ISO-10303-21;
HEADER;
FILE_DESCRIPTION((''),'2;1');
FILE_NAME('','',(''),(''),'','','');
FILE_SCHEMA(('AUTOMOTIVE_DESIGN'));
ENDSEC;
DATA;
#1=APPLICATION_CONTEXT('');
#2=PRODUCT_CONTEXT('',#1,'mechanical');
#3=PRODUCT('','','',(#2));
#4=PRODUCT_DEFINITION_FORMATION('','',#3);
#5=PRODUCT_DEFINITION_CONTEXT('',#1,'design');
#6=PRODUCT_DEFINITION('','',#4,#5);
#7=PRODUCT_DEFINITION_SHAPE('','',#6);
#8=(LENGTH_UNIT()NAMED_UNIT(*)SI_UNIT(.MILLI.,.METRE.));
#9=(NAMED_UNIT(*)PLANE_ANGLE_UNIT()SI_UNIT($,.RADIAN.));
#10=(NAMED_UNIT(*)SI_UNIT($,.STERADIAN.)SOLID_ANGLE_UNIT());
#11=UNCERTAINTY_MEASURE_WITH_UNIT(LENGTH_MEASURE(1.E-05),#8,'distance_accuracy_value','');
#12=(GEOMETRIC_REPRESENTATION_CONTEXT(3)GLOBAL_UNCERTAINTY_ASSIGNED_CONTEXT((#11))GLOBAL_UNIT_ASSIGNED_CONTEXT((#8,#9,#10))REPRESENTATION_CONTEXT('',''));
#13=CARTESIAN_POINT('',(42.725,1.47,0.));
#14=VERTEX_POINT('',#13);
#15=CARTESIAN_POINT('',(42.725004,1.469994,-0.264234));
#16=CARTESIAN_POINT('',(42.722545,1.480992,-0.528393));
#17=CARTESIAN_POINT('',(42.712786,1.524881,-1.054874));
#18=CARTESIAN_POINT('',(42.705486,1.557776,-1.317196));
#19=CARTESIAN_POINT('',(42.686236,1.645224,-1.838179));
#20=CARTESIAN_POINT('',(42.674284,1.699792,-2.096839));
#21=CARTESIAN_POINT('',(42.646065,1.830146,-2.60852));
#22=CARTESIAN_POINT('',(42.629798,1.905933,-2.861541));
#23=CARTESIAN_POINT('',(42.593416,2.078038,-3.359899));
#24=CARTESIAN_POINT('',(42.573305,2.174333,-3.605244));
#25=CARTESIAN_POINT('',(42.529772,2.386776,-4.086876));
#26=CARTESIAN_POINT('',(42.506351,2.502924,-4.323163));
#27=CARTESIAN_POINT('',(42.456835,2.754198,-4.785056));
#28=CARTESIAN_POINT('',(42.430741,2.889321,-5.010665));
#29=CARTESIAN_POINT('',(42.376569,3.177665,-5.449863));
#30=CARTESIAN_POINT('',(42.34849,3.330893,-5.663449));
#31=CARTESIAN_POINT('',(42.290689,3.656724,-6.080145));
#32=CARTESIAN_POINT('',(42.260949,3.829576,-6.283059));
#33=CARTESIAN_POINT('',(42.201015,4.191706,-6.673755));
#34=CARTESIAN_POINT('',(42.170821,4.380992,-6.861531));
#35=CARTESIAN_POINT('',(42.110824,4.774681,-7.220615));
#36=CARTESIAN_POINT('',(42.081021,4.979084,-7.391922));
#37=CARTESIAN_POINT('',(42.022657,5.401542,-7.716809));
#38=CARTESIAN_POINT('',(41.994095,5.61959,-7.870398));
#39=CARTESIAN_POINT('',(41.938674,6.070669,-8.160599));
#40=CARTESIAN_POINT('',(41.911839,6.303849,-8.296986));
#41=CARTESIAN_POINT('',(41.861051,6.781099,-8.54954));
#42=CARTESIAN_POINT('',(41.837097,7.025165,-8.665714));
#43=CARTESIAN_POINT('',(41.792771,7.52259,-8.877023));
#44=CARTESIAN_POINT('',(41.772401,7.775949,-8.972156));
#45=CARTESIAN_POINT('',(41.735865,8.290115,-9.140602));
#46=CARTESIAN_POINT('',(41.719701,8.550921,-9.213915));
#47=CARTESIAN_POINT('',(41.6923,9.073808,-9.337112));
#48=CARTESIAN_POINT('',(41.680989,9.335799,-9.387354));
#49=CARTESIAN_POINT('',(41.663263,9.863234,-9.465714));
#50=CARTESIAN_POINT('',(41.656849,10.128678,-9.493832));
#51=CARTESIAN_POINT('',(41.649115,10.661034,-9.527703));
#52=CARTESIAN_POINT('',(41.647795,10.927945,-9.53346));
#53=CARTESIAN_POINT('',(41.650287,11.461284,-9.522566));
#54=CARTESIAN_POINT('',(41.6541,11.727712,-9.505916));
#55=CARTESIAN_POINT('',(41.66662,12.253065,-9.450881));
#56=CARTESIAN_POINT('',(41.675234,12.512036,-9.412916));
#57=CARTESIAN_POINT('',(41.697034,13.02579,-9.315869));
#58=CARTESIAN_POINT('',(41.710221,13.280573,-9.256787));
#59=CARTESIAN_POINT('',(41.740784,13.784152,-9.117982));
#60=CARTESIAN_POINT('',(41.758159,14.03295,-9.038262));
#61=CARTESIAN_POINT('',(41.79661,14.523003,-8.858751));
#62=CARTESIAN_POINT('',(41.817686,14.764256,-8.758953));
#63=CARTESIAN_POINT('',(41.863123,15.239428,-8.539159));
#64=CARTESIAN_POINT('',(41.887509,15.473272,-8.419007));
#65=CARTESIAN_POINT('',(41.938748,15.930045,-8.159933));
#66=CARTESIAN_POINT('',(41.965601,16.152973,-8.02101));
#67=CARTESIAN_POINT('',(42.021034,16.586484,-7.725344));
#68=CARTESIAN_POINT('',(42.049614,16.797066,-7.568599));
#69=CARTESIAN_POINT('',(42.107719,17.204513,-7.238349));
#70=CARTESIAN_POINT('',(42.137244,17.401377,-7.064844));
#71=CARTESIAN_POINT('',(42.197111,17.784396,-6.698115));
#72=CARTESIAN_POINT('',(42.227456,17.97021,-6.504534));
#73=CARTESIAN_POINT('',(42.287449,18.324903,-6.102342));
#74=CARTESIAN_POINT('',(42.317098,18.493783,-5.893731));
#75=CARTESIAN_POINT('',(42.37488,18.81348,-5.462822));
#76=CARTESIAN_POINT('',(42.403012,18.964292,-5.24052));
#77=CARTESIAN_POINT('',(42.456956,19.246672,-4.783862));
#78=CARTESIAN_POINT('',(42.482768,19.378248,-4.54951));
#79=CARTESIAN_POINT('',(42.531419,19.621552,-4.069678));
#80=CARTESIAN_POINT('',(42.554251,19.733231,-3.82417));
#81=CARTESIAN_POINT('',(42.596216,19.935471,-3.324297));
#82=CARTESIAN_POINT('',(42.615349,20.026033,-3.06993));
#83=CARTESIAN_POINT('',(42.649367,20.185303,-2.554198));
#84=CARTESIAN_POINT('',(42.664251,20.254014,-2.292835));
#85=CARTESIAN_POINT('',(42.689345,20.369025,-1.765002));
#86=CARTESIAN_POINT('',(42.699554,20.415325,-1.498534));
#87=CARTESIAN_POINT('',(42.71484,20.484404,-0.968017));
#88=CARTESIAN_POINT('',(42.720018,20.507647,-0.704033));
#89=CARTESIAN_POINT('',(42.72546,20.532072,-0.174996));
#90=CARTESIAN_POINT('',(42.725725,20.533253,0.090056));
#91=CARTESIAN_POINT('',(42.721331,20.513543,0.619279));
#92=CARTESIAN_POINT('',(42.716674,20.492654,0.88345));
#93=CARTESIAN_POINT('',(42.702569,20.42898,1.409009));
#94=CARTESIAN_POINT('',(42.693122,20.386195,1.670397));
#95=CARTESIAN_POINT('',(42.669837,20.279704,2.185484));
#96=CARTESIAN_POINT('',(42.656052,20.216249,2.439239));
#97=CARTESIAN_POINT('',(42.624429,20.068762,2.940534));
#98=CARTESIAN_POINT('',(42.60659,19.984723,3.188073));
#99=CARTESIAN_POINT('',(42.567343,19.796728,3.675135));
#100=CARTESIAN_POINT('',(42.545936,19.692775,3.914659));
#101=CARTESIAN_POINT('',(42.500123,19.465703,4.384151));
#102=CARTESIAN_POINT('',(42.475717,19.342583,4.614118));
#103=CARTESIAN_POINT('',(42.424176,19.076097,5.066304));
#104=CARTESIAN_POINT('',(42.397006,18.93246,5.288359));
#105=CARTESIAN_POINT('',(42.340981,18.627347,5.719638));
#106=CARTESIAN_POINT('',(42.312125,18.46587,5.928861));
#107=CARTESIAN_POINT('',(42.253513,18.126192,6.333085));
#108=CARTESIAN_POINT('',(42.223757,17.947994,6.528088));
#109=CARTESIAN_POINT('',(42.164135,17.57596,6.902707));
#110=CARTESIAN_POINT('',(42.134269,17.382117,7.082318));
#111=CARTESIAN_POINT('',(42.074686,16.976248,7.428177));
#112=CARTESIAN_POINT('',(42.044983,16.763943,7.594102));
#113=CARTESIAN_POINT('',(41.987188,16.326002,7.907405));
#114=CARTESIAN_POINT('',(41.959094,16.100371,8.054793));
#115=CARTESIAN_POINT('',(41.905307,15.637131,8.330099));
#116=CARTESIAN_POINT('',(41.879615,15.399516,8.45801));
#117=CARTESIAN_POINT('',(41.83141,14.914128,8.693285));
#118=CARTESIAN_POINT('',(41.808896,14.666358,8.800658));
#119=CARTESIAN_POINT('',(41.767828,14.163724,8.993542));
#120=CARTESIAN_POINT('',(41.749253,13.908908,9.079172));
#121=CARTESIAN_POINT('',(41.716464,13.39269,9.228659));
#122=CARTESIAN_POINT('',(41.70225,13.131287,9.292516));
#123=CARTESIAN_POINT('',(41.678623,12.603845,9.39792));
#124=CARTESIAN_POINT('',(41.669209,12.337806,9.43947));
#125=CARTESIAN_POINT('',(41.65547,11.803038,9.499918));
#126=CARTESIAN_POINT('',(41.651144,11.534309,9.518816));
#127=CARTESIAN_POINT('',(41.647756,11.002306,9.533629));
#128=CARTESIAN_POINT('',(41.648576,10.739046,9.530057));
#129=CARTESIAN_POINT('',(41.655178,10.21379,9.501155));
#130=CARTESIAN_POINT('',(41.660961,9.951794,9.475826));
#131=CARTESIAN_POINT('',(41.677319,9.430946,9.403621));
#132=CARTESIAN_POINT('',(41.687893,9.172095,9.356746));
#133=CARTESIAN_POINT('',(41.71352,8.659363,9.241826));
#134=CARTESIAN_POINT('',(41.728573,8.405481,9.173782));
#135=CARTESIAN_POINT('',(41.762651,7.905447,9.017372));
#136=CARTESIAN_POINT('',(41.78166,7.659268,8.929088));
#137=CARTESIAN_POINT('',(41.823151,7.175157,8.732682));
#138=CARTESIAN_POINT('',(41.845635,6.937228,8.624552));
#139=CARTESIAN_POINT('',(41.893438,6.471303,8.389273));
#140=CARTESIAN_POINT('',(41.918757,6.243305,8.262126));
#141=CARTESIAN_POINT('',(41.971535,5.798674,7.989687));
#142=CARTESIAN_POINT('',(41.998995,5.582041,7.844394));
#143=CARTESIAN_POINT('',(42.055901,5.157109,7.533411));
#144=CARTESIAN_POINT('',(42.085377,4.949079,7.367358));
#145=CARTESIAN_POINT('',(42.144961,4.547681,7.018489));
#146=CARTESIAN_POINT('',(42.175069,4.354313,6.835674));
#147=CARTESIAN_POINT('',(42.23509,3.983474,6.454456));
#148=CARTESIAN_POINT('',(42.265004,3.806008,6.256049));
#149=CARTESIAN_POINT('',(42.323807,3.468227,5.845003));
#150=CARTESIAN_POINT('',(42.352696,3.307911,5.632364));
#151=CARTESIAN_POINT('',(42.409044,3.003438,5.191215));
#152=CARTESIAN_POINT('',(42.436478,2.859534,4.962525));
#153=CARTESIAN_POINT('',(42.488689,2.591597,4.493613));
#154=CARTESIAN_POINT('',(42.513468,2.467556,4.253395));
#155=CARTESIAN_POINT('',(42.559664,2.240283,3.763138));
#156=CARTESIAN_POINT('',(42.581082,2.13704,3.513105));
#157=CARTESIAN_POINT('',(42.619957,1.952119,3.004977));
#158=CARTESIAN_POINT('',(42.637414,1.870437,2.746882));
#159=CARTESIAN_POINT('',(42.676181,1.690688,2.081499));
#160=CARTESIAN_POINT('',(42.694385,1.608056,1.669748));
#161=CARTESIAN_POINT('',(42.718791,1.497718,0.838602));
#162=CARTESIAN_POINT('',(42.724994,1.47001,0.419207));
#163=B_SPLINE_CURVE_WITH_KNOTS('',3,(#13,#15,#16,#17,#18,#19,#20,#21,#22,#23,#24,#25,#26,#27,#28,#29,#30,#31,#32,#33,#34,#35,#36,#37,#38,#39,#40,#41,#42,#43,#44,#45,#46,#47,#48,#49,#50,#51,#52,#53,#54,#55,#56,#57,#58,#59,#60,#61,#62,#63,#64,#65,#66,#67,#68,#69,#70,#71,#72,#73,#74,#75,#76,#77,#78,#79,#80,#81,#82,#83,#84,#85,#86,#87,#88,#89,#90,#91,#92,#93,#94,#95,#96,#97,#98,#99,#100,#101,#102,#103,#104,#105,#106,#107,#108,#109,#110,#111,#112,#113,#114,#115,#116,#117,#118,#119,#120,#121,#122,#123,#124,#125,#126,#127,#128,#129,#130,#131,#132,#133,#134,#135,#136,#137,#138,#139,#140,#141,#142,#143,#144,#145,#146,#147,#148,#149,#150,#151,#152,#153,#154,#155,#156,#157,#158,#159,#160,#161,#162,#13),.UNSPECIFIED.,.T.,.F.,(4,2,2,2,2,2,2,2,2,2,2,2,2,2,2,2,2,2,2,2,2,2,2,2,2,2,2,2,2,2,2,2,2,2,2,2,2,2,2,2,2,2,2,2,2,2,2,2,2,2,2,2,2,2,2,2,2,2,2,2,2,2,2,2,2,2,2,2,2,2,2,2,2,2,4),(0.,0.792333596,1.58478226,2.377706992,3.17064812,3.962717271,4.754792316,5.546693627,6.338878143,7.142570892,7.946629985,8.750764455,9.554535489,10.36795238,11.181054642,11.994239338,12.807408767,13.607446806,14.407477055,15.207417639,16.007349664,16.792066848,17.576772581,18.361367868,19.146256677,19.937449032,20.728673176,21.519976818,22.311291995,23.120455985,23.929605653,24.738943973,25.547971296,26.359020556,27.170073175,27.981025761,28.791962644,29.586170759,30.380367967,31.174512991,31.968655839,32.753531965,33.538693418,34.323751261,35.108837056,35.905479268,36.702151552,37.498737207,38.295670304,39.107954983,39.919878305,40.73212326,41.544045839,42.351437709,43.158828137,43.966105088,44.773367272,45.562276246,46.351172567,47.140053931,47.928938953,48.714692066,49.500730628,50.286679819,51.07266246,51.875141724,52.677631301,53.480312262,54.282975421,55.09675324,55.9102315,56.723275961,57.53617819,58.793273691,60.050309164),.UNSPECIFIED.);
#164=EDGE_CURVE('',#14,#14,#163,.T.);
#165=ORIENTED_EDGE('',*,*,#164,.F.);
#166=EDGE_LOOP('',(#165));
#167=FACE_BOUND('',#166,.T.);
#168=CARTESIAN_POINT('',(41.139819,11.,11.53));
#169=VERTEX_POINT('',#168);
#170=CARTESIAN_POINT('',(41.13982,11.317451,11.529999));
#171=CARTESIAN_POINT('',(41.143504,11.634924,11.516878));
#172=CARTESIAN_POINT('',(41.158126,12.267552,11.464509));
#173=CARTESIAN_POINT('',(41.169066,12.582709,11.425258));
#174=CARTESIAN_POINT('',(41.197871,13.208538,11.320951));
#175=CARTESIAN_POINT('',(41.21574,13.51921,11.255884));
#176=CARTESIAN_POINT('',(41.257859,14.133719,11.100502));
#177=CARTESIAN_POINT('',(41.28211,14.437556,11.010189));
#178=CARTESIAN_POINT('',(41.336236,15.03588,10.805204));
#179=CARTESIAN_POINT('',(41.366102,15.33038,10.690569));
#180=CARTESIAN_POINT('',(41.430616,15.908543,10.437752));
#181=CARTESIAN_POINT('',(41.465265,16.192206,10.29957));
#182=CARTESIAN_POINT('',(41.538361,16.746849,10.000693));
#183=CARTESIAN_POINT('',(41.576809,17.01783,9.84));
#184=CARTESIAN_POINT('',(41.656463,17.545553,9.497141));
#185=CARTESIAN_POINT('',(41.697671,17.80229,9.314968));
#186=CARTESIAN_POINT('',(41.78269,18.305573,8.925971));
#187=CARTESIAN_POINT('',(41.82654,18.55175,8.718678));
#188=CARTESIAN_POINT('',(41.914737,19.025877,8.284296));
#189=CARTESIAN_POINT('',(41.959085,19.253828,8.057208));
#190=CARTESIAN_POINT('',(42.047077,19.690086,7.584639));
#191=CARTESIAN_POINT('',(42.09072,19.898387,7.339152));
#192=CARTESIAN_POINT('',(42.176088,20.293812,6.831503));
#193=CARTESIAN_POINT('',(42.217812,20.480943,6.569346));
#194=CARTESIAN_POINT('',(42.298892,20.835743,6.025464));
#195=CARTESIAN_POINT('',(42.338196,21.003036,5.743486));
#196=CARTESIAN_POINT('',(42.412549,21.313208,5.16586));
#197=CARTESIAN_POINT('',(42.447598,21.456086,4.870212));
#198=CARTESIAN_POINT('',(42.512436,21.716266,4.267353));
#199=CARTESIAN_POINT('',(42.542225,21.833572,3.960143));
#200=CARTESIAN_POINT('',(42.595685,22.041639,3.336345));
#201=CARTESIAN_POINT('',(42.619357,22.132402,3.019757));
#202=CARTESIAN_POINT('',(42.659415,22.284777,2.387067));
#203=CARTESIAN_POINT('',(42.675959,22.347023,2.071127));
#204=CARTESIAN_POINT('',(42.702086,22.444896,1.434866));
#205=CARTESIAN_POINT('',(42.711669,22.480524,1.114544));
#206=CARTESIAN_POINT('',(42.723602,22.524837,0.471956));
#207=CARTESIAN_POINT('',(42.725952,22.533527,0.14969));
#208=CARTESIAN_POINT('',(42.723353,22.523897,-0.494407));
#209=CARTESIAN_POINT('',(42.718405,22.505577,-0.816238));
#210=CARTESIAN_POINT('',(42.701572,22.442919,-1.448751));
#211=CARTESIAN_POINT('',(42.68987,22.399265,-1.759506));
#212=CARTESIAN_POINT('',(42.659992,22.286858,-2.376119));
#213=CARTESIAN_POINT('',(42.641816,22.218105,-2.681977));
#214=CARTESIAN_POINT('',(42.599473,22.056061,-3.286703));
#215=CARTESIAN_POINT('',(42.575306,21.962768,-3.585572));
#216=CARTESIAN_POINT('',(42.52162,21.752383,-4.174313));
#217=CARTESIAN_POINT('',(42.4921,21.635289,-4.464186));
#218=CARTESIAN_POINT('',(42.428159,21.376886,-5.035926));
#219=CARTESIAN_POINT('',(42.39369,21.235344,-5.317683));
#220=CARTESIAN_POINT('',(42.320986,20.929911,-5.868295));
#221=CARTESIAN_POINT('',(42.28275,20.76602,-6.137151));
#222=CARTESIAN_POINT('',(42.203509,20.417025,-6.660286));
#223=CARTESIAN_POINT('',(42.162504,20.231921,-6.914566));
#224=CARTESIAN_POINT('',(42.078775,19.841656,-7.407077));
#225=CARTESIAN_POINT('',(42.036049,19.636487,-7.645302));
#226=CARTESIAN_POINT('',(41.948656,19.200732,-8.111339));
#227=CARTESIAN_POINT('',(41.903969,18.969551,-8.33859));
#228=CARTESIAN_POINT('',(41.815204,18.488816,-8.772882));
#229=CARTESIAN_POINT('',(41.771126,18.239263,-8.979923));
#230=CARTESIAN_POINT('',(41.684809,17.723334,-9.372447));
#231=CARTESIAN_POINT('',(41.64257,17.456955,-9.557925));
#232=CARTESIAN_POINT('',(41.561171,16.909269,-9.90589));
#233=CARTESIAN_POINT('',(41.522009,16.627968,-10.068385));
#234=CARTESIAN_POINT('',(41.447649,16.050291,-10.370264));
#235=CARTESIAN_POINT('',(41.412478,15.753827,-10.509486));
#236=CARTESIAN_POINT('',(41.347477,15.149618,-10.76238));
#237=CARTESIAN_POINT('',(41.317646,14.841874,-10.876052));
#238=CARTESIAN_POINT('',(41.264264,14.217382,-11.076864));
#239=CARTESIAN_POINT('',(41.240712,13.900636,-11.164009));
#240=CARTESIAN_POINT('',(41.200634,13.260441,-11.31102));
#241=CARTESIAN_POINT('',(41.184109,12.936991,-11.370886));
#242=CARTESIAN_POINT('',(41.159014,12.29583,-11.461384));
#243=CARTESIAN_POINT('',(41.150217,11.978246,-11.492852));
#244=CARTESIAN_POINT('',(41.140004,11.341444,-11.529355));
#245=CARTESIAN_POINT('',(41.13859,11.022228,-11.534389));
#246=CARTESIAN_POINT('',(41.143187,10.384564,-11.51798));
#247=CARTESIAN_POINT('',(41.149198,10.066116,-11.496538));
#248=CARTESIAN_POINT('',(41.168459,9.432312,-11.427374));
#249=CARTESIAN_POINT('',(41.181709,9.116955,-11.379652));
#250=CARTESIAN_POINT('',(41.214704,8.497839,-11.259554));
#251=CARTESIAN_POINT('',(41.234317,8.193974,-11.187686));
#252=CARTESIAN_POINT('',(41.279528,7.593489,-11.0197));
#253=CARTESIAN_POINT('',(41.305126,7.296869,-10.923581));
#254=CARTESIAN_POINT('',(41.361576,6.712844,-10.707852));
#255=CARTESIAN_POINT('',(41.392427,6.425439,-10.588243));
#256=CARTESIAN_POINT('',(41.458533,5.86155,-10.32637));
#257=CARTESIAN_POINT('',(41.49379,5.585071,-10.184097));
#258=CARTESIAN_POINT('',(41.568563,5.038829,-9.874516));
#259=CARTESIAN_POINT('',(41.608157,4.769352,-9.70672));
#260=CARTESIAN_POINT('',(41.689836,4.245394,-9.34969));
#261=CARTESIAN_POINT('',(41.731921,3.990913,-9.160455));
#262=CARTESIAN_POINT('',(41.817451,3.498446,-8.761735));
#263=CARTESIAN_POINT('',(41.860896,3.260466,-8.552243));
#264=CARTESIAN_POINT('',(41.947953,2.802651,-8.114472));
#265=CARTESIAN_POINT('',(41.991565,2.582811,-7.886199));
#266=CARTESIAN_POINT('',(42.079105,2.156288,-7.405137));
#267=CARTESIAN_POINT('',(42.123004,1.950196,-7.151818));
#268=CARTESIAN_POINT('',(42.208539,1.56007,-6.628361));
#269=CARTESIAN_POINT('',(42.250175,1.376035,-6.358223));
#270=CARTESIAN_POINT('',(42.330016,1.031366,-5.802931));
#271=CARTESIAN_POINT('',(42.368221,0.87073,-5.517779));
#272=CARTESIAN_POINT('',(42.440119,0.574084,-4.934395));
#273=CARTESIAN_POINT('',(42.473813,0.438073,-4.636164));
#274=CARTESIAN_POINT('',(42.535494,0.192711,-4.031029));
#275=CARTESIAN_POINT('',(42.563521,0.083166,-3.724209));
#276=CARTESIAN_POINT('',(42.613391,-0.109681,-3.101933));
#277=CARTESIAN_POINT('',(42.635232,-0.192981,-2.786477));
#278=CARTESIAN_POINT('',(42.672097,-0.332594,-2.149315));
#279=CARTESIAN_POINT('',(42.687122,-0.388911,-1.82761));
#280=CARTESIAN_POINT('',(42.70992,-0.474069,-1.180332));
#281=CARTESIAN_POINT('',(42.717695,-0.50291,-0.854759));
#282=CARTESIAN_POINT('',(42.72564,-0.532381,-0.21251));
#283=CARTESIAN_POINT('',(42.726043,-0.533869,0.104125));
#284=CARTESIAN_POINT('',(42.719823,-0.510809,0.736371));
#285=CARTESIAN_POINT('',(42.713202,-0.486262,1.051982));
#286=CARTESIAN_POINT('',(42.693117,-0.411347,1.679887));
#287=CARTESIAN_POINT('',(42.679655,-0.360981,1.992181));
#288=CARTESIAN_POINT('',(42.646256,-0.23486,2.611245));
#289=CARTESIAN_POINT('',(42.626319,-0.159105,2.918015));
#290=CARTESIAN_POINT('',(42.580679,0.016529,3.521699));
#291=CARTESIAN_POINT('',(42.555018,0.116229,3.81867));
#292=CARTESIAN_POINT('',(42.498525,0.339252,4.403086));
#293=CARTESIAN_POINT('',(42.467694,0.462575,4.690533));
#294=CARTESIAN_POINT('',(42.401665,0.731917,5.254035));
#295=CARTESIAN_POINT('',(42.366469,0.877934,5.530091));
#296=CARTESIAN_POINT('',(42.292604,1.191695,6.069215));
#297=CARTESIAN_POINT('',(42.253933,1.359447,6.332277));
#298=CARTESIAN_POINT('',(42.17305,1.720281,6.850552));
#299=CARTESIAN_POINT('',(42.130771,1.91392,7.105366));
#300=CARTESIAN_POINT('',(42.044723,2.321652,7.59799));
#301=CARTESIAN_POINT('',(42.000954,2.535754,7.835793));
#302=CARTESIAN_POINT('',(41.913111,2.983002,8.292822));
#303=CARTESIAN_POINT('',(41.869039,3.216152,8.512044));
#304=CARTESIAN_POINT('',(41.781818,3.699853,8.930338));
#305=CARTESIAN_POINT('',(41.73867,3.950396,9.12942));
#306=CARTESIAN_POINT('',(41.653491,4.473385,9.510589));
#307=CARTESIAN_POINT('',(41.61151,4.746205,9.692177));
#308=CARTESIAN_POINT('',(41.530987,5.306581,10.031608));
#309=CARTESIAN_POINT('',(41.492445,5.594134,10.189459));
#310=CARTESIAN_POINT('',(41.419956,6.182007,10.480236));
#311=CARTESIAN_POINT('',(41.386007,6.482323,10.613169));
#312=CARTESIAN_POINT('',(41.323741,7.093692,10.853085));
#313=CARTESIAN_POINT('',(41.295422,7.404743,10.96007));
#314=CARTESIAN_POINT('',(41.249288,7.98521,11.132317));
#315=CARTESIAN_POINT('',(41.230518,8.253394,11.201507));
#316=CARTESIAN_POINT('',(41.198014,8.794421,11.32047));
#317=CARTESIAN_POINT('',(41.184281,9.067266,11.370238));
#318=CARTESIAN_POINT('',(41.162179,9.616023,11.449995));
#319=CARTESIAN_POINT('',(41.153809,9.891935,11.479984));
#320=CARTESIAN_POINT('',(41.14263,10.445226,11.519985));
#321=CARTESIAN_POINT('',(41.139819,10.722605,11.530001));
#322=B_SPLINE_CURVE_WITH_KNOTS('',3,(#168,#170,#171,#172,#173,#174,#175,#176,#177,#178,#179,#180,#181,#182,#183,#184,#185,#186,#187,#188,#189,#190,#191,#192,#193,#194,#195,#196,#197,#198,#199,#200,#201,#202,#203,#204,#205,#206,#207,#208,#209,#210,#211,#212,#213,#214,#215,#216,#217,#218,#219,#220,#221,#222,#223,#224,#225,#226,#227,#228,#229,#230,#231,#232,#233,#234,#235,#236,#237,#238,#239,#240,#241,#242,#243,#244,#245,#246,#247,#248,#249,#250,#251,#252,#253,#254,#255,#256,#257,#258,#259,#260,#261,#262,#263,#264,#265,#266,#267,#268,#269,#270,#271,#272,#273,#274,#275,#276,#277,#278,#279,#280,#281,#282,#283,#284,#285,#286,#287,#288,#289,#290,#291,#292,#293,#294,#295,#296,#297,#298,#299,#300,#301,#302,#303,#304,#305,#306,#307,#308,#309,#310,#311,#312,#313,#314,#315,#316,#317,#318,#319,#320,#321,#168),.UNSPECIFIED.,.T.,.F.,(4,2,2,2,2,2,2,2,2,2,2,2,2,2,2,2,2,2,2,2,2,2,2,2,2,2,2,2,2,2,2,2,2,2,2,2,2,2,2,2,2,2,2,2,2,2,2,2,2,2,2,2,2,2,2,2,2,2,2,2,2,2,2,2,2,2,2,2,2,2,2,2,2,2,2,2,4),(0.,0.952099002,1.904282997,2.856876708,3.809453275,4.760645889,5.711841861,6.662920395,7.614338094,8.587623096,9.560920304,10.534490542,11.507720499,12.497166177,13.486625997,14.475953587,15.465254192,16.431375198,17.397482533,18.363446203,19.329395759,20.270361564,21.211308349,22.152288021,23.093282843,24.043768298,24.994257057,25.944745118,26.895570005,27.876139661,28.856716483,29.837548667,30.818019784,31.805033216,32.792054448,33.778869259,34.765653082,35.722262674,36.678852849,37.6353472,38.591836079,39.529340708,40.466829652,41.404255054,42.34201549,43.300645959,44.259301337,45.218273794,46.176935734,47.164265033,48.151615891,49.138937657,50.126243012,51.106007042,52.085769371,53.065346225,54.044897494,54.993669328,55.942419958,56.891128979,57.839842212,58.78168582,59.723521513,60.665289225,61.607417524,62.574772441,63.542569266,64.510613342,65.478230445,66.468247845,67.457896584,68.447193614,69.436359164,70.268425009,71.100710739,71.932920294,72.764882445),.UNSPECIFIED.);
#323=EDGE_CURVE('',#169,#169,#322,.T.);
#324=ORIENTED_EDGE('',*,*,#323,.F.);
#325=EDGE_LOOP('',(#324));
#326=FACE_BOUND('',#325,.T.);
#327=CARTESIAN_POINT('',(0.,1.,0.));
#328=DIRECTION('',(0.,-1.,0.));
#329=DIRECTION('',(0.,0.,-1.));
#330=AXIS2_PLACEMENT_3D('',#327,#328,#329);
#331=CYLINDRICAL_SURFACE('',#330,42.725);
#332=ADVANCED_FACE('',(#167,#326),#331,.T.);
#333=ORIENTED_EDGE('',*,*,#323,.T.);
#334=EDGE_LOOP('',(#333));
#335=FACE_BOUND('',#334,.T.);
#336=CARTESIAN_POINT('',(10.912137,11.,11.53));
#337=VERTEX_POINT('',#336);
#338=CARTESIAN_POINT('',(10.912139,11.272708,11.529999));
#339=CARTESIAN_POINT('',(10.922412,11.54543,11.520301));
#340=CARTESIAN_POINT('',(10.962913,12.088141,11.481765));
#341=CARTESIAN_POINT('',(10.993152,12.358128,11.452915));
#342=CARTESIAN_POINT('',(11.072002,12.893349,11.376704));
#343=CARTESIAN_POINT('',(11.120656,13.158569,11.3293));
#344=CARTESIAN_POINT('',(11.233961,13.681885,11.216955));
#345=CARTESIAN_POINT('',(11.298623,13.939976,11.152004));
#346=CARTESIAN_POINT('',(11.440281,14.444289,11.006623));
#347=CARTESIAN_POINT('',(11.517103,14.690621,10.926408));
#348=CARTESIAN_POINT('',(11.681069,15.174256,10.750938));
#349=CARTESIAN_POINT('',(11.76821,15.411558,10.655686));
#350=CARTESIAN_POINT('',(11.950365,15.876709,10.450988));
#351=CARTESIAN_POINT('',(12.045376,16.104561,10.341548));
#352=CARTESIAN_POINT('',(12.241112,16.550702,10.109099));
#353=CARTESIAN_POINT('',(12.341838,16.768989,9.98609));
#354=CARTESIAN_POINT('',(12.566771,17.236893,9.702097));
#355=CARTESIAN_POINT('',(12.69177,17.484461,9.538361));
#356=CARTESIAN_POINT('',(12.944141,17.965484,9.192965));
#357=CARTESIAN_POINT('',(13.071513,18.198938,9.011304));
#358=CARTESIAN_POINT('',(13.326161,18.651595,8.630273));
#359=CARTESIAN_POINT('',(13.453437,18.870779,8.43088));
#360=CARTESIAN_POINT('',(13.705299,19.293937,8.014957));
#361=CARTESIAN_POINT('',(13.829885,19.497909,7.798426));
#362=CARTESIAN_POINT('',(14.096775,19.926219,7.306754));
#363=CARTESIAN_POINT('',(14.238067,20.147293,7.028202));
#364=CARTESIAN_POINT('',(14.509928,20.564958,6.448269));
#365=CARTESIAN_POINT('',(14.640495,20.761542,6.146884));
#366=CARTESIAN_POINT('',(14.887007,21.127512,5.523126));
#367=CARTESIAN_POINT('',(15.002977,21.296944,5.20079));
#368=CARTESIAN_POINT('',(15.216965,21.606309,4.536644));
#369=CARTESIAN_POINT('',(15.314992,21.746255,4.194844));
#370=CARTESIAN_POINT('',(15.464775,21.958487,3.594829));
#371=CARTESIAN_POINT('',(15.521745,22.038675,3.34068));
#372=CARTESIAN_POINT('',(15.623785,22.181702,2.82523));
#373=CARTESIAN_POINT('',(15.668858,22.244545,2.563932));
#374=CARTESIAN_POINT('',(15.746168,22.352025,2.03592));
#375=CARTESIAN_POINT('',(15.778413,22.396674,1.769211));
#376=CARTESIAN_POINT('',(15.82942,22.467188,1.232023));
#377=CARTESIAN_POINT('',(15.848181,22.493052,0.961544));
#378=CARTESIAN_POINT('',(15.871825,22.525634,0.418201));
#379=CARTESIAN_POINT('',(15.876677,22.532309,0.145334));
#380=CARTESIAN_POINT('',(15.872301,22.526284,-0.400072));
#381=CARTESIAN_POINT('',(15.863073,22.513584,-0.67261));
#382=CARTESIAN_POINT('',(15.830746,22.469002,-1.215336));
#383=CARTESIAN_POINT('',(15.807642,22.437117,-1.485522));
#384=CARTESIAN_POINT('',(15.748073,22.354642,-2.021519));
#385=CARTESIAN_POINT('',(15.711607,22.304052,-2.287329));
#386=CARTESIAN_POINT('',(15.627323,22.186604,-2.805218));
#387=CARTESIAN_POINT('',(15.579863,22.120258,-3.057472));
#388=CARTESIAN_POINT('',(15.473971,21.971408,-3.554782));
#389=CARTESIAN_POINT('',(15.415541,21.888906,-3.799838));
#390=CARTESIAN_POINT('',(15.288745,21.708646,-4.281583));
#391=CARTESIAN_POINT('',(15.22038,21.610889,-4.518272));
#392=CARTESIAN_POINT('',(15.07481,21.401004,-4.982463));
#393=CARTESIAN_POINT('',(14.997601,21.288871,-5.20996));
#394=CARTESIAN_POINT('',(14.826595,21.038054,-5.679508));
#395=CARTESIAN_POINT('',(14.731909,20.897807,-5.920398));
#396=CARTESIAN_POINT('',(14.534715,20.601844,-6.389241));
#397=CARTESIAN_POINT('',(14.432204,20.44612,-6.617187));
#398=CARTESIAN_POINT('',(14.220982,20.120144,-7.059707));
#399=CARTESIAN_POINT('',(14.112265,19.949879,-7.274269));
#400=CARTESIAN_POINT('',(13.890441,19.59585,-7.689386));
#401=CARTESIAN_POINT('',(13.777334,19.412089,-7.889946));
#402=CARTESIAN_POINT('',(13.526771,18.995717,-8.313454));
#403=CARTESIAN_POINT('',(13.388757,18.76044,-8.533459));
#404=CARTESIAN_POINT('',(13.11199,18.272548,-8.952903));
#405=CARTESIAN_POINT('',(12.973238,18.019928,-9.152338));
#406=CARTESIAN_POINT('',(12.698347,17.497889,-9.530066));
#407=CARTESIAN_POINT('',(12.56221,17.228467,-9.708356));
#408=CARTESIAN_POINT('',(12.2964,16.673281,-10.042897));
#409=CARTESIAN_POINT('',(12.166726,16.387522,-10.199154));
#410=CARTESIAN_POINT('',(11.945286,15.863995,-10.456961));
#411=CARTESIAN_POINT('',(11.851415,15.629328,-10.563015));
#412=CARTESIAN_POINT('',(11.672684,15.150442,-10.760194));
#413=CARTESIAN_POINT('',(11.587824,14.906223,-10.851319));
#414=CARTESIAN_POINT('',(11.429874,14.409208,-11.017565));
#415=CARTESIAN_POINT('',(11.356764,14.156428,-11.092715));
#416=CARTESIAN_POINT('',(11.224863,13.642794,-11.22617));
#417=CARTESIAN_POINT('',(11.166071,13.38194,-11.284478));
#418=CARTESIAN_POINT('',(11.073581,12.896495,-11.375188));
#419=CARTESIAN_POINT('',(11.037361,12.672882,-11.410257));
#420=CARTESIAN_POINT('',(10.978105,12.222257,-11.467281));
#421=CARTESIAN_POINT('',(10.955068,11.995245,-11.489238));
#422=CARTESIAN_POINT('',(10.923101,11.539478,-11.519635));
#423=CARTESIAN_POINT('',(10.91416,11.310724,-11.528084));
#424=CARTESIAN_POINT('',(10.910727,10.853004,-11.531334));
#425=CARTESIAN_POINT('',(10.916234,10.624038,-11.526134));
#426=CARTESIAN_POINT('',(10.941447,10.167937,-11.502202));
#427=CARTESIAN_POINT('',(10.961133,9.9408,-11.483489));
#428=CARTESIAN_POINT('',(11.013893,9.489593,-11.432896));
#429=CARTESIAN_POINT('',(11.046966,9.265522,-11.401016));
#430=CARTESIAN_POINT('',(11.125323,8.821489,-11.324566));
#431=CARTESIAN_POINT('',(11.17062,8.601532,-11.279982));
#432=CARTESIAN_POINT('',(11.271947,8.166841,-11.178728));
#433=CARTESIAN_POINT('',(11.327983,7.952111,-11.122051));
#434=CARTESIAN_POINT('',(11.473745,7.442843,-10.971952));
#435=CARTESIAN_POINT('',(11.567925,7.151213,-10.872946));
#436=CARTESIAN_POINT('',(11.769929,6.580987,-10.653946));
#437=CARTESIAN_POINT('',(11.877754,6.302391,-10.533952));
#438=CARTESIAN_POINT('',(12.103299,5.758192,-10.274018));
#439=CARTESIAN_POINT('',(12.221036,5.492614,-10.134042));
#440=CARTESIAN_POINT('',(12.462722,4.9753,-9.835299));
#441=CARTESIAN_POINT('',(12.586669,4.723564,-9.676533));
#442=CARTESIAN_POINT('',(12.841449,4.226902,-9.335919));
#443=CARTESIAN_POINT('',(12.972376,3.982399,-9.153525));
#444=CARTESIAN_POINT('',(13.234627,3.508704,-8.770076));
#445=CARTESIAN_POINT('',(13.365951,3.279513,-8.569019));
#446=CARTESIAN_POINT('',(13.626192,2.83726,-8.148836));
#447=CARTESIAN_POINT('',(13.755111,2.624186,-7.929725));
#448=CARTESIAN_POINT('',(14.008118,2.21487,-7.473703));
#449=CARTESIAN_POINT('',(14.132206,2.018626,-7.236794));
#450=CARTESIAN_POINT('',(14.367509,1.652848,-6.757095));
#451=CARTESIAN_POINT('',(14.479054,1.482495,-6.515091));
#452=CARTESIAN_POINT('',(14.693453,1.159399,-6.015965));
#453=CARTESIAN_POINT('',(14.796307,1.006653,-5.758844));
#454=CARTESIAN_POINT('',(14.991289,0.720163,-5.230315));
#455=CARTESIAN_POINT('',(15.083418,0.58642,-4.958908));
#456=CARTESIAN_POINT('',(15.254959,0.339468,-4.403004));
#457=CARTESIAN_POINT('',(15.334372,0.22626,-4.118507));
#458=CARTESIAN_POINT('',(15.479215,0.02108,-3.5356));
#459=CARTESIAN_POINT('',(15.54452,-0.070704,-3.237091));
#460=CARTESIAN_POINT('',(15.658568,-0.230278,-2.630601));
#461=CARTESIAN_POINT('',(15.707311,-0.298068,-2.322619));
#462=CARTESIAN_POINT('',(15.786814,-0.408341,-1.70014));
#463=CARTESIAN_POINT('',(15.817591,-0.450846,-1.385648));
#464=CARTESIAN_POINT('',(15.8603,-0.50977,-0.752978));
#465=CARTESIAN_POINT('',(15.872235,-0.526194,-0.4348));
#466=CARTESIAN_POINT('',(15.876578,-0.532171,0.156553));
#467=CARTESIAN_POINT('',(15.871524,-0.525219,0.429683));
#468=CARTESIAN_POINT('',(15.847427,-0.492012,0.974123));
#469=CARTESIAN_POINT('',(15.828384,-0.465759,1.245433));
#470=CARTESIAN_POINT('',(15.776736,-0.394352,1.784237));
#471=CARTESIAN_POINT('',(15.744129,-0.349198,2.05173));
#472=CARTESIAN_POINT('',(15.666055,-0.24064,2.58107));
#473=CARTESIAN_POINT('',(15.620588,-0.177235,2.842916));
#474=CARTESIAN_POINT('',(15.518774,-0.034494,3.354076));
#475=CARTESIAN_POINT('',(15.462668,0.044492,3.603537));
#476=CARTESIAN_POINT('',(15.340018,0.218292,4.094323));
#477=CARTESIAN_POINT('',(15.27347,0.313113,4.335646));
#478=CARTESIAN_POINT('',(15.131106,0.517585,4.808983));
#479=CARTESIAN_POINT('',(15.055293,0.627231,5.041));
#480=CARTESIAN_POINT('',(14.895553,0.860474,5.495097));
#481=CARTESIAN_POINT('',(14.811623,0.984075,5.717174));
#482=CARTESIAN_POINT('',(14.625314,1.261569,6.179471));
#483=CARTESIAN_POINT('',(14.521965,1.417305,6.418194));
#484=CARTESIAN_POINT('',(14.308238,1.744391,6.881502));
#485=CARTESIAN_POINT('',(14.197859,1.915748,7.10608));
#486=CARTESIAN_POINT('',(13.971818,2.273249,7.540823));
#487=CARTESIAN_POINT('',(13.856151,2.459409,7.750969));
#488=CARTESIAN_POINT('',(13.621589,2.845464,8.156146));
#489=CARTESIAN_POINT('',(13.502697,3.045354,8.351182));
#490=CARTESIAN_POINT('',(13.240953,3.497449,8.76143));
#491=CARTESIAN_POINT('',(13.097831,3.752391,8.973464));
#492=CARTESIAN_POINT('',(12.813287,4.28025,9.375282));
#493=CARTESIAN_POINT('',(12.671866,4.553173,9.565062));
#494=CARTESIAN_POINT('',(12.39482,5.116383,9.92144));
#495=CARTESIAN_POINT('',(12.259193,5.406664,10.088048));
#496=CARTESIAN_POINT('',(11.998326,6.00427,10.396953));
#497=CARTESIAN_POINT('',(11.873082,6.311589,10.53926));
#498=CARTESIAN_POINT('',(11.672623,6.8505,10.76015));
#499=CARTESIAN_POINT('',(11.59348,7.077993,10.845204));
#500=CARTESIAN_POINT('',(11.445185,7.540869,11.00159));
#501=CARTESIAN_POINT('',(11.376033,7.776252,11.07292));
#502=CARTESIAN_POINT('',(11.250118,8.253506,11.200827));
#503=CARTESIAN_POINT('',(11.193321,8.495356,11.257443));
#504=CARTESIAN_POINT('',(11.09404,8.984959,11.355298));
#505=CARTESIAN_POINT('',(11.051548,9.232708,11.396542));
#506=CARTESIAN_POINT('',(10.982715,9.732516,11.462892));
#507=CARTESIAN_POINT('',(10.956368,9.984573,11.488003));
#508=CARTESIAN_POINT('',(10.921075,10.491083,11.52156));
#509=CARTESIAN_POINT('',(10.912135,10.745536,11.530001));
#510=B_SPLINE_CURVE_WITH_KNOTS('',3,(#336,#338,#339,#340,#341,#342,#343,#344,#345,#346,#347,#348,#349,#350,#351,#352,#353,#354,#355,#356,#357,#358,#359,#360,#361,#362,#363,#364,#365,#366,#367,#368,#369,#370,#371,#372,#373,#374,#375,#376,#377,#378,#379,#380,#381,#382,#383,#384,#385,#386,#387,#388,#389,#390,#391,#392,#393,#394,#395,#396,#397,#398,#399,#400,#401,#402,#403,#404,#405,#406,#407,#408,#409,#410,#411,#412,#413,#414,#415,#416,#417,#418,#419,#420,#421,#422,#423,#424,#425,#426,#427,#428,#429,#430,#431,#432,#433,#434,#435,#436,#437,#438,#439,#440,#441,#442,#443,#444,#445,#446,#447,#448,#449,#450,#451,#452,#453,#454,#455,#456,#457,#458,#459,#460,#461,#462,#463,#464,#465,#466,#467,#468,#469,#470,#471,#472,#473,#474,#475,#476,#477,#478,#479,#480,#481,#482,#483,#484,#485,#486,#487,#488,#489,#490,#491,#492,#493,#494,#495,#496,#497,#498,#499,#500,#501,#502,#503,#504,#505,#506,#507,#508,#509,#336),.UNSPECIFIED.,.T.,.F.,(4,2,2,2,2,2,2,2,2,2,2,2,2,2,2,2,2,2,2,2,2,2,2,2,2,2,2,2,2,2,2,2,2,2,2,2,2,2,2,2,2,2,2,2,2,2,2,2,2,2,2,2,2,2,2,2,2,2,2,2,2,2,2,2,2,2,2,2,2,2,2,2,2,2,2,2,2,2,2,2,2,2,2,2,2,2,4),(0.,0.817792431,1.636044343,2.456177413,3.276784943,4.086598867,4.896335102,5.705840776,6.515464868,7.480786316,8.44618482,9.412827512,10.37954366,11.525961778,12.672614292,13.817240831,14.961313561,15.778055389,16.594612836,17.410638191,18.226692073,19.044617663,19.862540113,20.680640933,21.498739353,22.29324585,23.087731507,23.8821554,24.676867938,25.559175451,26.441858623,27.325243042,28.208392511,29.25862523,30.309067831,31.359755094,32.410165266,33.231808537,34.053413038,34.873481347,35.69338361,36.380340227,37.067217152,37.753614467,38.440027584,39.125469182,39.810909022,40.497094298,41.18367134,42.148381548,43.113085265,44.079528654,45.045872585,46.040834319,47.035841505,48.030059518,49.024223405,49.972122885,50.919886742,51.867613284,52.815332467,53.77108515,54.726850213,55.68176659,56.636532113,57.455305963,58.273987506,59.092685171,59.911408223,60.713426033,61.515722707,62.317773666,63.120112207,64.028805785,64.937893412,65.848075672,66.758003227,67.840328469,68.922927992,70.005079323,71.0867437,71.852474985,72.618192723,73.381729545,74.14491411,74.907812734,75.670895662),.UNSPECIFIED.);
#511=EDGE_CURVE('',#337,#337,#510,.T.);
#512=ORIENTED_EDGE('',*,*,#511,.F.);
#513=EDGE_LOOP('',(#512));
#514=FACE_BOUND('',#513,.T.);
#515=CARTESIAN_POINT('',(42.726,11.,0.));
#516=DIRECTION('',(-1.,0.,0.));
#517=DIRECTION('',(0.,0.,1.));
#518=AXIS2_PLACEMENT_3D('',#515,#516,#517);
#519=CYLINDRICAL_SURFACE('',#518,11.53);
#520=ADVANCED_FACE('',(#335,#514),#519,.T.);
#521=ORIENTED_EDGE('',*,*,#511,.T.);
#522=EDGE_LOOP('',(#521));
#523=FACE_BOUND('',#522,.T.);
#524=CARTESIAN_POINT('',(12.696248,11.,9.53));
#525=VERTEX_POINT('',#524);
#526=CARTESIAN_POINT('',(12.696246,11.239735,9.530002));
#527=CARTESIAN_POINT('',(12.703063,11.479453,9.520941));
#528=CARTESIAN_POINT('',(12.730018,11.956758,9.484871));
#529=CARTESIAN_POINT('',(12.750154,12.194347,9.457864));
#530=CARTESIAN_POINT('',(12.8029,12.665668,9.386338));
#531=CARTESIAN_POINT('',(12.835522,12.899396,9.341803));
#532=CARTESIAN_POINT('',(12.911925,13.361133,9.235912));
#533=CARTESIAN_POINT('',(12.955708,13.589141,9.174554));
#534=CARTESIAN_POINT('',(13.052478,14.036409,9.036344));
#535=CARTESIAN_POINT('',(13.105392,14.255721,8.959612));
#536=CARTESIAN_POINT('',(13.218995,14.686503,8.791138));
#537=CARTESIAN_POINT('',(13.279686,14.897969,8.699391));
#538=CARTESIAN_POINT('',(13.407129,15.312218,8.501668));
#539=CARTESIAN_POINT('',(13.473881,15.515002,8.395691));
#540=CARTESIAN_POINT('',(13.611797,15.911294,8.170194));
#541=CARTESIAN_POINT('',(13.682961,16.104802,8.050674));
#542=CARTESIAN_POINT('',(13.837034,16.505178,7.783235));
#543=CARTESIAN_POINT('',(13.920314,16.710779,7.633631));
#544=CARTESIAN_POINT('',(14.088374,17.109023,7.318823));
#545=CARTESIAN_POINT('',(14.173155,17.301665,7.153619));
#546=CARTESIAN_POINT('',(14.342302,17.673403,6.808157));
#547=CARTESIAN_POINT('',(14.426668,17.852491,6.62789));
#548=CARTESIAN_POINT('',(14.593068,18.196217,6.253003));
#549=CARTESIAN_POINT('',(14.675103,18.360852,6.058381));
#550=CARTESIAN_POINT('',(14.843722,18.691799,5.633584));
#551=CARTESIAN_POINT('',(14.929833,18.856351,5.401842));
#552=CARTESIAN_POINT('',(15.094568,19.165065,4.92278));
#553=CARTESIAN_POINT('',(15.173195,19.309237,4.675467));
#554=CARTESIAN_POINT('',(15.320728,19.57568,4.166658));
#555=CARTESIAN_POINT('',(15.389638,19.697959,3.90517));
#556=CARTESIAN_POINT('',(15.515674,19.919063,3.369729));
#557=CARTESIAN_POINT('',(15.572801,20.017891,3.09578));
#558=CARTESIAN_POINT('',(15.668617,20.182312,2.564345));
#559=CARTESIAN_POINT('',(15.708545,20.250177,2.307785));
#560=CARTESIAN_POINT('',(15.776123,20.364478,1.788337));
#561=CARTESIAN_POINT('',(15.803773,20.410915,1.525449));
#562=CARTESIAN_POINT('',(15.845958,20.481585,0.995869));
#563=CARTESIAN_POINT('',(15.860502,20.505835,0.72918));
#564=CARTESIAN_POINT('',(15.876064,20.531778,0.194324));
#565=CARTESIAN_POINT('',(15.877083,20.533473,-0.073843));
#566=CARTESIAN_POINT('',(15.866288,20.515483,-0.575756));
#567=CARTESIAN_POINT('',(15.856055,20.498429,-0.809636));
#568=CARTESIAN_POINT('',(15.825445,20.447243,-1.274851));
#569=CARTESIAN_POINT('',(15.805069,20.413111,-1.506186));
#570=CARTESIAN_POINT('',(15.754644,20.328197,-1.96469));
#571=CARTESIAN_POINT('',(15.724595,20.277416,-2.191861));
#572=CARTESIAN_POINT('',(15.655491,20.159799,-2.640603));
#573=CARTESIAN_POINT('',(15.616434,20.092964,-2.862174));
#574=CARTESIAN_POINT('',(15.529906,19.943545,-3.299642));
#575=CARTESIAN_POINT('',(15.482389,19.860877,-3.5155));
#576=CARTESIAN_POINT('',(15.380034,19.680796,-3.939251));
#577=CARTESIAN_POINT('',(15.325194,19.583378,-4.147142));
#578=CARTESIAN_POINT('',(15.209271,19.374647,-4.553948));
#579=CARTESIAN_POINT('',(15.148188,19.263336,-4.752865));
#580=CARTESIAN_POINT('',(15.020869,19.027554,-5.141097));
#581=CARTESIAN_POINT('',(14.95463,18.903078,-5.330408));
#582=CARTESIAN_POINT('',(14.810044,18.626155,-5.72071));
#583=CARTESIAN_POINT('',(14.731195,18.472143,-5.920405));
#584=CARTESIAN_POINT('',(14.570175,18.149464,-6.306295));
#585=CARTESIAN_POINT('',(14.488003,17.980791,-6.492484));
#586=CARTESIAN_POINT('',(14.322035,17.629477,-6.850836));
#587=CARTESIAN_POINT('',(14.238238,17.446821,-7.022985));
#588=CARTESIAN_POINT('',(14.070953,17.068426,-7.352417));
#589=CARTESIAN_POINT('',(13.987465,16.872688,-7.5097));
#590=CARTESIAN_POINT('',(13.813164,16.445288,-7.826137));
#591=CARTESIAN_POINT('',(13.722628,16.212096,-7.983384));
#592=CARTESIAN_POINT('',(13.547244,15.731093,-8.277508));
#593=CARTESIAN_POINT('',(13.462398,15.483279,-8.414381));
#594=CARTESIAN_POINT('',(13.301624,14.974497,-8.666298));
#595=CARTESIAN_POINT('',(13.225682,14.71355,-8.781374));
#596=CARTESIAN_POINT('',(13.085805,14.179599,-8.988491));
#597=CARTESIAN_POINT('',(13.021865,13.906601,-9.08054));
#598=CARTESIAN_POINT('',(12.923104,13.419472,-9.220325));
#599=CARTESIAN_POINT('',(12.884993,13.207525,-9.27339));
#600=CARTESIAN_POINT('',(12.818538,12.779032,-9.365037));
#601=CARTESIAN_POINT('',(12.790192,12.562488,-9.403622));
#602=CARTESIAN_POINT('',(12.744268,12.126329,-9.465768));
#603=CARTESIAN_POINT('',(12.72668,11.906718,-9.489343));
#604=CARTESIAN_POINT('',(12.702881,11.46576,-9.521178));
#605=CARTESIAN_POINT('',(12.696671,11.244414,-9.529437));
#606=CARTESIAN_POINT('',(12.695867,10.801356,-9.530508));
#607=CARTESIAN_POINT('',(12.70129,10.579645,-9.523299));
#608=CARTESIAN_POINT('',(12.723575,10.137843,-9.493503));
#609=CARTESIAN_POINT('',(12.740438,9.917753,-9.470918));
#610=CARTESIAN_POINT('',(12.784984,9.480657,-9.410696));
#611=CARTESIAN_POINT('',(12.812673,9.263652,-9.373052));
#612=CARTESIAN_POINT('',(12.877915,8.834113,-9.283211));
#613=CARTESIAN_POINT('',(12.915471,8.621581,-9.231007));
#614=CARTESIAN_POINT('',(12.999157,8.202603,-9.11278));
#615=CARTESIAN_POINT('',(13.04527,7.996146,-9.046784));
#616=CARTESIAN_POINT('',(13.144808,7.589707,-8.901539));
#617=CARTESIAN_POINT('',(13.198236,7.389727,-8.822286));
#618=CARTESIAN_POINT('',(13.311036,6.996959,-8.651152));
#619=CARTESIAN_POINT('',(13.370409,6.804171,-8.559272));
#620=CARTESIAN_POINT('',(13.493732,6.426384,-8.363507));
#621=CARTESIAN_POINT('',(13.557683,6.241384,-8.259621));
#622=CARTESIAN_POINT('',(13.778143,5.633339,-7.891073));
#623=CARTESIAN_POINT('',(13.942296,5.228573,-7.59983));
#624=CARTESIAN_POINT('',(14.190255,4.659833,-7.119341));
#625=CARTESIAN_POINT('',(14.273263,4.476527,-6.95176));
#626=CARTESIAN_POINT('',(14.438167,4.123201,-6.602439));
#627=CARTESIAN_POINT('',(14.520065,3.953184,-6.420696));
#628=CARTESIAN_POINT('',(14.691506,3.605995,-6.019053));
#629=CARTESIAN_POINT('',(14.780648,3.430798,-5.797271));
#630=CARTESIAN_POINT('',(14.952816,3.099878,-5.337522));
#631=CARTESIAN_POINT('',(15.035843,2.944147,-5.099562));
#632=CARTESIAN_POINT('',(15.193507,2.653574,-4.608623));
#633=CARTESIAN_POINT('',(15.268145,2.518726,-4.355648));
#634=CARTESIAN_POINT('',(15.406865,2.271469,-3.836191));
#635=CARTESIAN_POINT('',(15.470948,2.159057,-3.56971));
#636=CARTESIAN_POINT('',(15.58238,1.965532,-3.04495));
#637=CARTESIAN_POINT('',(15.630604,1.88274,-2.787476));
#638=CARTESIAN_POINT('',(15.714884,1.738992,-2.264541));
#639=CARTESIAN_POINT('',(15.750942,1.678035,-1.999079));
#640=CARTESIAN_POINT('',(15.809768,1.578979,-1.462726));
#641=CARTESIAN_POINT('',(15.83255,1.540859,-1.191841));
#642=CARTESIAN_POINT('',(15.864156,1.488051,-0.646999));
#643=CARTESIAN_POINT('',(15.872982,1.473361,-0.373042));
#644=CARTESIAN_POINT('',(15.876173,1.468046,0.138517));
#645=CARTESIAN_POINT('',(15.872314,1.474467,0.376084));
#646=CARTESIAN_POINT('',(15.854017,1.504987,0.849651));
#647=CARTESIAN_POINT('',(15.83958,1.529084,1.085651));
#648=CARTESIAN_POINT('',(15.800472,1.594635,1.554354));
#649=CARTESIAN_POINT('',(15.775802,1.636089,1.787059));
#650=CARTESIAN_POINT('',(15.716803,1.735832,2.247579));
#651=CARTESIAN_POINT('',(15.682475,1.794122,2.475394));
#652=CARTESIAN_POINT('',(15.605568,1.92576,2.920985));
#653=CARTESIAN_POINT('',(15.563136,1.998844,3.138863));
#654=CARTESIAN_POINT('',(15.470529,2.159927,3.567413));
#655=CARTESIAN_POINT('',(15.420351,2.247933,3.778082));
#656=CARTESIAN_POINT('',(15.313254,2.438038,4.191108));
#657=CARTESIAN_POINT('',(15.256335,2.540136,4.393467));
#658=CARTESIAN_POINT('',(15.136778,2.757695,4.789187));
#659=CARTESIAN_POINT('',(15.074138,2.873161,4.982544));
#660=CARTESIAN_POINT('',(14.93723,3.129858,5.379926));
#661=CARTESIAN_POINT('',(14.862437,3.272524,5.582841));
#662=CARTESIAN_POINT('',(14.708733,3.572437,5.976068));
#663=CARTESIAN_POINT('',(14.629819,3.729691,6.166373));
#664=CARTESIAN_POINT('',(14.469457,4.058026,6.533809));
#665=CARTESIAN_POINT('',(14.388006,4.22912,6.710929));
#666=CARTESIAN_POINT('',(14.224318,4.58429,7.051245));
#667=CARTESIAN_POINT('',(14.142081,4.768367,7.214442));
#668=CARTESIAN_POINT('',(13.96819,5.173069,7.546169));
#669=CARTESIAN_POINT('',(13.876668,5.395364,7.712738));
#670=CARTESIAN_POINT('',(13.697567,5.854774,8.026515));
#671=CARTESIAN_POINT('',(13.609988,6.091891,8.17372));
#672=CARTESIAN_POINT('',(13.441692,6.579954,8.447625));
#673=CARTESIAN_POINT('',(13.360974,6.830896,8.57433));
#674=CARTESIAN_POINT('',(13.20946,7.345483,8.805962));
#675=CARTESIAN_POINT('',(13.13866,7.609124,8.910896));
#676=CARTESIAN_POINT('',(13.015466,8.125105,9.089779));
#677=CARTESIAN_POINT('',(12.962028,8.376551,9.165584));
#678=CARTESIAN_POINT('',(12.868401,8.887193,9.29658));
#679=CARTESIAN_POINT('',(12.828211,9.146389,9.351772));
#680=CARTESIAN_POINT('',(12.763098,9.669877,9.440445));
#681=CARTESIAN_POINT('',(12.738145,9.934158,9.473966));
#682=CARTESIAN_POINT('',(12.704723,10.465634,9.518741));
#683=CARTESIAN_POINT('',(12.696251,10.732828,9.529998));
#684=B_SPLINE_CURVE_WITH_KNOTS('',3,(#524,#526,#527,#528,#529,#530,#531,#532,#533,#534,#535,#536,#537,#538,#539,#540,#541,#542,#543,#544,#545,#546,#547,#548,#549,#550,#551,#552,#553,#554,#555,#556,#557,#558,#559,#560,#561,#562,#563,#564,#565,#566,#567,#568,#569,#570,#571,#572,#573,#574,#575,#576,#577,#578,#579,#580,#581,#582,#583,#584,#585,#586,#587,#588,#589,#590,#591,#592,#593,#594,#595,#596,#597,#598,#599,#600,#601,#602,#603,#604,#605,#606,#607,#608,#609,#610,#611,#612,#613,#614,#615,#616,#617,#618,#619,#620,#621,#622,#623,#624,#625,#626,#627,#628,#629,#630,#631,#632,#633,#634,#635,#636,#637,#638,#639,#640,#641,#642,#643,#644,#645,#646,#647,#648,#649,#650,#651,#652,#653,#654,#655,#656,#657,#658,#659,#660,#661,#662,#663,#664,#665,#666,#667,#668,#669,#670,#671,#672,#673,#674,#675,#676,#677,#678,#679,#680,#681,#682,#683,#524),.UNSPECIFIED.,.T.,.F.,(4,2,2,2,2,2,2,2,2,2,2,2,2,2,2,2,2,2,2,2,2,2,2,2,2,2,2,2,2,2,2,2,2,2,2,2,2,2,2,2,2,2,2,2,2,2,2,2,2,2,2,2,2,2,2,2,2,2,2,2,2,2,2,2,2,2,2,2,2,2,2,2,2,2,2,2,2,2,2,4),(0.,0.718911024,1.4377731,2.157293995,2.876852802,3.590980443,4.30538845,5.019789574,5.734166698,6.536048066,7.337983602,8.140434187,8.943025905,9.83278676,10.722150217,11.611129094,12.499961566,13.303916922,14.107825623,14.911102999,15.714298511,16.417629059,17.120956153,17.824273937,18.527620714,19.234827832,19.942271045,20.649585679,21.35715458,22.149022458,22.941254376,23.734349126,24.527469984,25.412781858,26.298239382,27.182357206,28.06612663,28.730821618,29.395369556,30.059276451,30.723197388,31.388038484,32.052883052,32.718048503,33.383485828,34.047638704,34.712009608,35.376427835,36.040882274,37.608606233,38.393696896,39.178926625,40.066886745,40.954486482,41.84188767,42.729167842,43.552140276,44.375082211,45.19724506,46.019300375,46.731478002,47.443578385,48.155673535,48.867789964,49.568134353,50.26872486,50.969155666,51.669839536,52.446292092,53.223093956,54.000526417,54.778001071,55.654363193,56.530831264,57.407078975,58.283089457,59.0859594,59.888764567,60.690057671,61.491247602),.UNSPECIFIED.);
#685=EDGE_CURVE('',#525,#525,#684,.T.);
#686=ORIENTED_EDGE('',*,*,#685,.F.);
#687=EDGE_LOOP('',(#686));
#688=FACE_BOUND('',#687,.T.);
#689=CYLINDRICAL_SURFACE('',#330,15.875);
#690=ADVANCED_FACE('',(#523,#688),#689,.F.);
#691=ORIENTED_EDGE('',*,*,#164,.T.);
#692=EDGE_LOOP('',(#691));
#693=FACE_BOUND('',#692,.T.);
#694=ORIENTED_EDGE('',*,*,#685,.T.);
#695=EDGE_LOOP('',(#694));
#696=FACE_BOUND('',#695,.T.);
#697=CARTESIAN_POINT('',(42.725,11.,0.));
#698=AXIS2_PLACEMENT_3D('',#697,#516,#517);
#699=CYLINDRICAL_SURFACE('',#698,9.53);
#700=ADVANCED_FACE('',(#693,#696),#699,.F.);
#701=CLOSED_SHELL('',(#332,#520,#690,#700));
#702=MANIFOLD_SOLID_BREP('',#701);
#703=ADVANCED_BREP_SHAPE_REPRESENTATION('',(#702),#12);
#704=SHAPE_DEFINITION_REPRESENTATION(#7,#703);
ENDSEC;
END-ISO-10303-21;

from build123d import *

# Parameters (mm, degrees)
SKETCH1_R                = 42.725
SKETCH1_R_2              = 15.875
BOSS_EXTRUDE1_DEPTH      = 1
SKETCH2_R                = 42.725
SKETCH2_R_2              = 41.725
SKETCH2_R_3              = 16.875
SKETCH2_R_4              = 15.875
BOSS_EXTRUDE2_DEPTH      = 25
SKETCH3_R                = 9.53
CUT_EXTRUDE1_DEPTH       = 66.778805477
BOSS_EXTRUDE3_REACH      = 67.779
BOSS_EXTRUDE3_END_RADIUS = 42.725
SKETCH9_R                = 11.53
SKETCH9_R_2              = 9.53
CUT_EXTRUDE2_DEPTH       = 66.990091471
CUT_EXTRUDE2_DEPTH_BACK  = 66.990091471
CUT_EXTRUDE4_DEPTH       = 53.449977529
CUT_EXTRUDE4_DEPTH_BACK  = 53.449977529
SKETCH11_R               = 50
SKETCH11_R_2             = 11.53


with BuildPart() as part:
    # Sketch1 → Boss-Extrude1 (new body)
    with BuildSketch(Plane(origin=(0, 0, 0), x_dir=(1, 0, 0), z_dir=(0, 1, 0))):
        Circle(SKETCH1_R)
        Circle(SKETCH1_R_2, mode=Mode.SUBTRACT)
    extrude(amount=BOSS_EXTRUDE1_DEPTH)

    # Sketch2 → Boss-Extrude2 (add)
    # profile 1 of 2: a face of its own
    with BuildSketch(Plane(origin=(0, 1, 0), x_dir=(1, 0, 0), z_dir=(0, 1, 0))):
        Circle(SKETCH2_R)
        Circle(SKETCH2_R_2, mode=Mode.SUBTRACT)
    # profile 2 of 2: a face of its own
    with BuildSketch(Plane(origin=(0, 1, 0), x_dir=(1, 0, 0), z_dir=(0, 1, 0))):
        Circle(SKETCH2_R_3)
        Circle(SKETCH2_R_4, mode=Mode.SUBTRACT)
    extrude(amount=BOSS_EXTRUDE2_DEPTH)

    # Sketch3 → Cut-Extrude1 (cut, through all)
    with BuildSketch(Plane(origin=(0, 0, 0), x_dir=(0, 0, -1), z_dir=(1, 0, 0))):
        with Locations((0, 11)):
            Circle(SKETCH3_R)
    extrude(amount=CUT_EXTRUDE1_DEPTH, mode=Mode.SUBTRACT)

    # Boss-Extrude3: up to this cylinder (the profile starts inside it)
    boss_extrude3_end = Plane(origin=(0, 11, 0), z_dir=(0, -1, 0)) * Cylinder(BOSS_EXTRUDE3_END_RADIUS, 222.008, mode=Mode.PRIVATE)
    # Sketch9 → Boss-Extrude3 (add, up to the surface)
    with BuildSketch(Plane(origin=(0, 0, 0), x_dir=(0, 0, -1), z_dir=(1, 0, 0)), mode=Mode.PRIVATE) as boss_extrude3_sk1:
        with Locations((0, 11)):
            Circle(SKETCH9_R)
        with Locations((0, 11)):
            Circle(SKETCH9_R_2, mode=Mode.SUBTRACT)
    boss_extrude3_tool1 = extrude(boss_extrude3_sk1.sketch, amount=BOSS_EXTRUDE3_REACH, mode=Mode.PRIVATE) & boss_extrude3_end
    add(boss_extrude3_tool1.solids().sort_by_distance((0, 11, 11.203882))[0])

    # Sketch10 → Cut-Extrude2 (cut, two sides: drawn at the far end of the back side and taken through both)
    with BuildSketch(Plane(origin=(0, 26, 0), x_dir=(1, 0, 0), z_dir=(0, 1, 0)).offset(-CUT_EXTRUDE2_DEPTH_BACK)):
        with BuildLine():
            ThreePointArc((1.562409729, -15.797927106), (15.875, 0), (1.562409729, 15.797927106))
            Line((1.562409729, 15.797927106), (41.036063238, 11.893995921))
            ThreePointArc((41.036063238, 11.893995921), (-42.725, 0), (41.036063238, -11.893995921))
            Line((41.036063238, -11.893995921), (1.562409729, -15.797927106))
        make_face()
    extrude(amount=CUT_EXTRUDE2_DEPTH + CUT_EXTRUDE2_DEPTH_BACK, mode=Mode.SUBTRACT)

    # Sketch11 → Cut-Extrude4 (cut, two sides: drawn at the far end of the back side and taken through both)
    with BuildSketch(Plane(origin=(0, 0, 0), x_dir=(0, 0, -1), z_dir=(1, 0, 0)).offset(-CUT_EXTRUDE4_DEPTH_BACK)):
        with Locations((0, 11)):
            Circle(SKETCH11_R)
        with Locations((0, 11)):
            Circle(SKETCH11_R_2, mode=Mode.SUBTRACT)
    extrude(amount=CUT_EXTRUDE4_DEPTH + CUT_EXTRUDE4_DEPTH_BACK, mode=Mode.SUBTRACT)


solid = part.part
